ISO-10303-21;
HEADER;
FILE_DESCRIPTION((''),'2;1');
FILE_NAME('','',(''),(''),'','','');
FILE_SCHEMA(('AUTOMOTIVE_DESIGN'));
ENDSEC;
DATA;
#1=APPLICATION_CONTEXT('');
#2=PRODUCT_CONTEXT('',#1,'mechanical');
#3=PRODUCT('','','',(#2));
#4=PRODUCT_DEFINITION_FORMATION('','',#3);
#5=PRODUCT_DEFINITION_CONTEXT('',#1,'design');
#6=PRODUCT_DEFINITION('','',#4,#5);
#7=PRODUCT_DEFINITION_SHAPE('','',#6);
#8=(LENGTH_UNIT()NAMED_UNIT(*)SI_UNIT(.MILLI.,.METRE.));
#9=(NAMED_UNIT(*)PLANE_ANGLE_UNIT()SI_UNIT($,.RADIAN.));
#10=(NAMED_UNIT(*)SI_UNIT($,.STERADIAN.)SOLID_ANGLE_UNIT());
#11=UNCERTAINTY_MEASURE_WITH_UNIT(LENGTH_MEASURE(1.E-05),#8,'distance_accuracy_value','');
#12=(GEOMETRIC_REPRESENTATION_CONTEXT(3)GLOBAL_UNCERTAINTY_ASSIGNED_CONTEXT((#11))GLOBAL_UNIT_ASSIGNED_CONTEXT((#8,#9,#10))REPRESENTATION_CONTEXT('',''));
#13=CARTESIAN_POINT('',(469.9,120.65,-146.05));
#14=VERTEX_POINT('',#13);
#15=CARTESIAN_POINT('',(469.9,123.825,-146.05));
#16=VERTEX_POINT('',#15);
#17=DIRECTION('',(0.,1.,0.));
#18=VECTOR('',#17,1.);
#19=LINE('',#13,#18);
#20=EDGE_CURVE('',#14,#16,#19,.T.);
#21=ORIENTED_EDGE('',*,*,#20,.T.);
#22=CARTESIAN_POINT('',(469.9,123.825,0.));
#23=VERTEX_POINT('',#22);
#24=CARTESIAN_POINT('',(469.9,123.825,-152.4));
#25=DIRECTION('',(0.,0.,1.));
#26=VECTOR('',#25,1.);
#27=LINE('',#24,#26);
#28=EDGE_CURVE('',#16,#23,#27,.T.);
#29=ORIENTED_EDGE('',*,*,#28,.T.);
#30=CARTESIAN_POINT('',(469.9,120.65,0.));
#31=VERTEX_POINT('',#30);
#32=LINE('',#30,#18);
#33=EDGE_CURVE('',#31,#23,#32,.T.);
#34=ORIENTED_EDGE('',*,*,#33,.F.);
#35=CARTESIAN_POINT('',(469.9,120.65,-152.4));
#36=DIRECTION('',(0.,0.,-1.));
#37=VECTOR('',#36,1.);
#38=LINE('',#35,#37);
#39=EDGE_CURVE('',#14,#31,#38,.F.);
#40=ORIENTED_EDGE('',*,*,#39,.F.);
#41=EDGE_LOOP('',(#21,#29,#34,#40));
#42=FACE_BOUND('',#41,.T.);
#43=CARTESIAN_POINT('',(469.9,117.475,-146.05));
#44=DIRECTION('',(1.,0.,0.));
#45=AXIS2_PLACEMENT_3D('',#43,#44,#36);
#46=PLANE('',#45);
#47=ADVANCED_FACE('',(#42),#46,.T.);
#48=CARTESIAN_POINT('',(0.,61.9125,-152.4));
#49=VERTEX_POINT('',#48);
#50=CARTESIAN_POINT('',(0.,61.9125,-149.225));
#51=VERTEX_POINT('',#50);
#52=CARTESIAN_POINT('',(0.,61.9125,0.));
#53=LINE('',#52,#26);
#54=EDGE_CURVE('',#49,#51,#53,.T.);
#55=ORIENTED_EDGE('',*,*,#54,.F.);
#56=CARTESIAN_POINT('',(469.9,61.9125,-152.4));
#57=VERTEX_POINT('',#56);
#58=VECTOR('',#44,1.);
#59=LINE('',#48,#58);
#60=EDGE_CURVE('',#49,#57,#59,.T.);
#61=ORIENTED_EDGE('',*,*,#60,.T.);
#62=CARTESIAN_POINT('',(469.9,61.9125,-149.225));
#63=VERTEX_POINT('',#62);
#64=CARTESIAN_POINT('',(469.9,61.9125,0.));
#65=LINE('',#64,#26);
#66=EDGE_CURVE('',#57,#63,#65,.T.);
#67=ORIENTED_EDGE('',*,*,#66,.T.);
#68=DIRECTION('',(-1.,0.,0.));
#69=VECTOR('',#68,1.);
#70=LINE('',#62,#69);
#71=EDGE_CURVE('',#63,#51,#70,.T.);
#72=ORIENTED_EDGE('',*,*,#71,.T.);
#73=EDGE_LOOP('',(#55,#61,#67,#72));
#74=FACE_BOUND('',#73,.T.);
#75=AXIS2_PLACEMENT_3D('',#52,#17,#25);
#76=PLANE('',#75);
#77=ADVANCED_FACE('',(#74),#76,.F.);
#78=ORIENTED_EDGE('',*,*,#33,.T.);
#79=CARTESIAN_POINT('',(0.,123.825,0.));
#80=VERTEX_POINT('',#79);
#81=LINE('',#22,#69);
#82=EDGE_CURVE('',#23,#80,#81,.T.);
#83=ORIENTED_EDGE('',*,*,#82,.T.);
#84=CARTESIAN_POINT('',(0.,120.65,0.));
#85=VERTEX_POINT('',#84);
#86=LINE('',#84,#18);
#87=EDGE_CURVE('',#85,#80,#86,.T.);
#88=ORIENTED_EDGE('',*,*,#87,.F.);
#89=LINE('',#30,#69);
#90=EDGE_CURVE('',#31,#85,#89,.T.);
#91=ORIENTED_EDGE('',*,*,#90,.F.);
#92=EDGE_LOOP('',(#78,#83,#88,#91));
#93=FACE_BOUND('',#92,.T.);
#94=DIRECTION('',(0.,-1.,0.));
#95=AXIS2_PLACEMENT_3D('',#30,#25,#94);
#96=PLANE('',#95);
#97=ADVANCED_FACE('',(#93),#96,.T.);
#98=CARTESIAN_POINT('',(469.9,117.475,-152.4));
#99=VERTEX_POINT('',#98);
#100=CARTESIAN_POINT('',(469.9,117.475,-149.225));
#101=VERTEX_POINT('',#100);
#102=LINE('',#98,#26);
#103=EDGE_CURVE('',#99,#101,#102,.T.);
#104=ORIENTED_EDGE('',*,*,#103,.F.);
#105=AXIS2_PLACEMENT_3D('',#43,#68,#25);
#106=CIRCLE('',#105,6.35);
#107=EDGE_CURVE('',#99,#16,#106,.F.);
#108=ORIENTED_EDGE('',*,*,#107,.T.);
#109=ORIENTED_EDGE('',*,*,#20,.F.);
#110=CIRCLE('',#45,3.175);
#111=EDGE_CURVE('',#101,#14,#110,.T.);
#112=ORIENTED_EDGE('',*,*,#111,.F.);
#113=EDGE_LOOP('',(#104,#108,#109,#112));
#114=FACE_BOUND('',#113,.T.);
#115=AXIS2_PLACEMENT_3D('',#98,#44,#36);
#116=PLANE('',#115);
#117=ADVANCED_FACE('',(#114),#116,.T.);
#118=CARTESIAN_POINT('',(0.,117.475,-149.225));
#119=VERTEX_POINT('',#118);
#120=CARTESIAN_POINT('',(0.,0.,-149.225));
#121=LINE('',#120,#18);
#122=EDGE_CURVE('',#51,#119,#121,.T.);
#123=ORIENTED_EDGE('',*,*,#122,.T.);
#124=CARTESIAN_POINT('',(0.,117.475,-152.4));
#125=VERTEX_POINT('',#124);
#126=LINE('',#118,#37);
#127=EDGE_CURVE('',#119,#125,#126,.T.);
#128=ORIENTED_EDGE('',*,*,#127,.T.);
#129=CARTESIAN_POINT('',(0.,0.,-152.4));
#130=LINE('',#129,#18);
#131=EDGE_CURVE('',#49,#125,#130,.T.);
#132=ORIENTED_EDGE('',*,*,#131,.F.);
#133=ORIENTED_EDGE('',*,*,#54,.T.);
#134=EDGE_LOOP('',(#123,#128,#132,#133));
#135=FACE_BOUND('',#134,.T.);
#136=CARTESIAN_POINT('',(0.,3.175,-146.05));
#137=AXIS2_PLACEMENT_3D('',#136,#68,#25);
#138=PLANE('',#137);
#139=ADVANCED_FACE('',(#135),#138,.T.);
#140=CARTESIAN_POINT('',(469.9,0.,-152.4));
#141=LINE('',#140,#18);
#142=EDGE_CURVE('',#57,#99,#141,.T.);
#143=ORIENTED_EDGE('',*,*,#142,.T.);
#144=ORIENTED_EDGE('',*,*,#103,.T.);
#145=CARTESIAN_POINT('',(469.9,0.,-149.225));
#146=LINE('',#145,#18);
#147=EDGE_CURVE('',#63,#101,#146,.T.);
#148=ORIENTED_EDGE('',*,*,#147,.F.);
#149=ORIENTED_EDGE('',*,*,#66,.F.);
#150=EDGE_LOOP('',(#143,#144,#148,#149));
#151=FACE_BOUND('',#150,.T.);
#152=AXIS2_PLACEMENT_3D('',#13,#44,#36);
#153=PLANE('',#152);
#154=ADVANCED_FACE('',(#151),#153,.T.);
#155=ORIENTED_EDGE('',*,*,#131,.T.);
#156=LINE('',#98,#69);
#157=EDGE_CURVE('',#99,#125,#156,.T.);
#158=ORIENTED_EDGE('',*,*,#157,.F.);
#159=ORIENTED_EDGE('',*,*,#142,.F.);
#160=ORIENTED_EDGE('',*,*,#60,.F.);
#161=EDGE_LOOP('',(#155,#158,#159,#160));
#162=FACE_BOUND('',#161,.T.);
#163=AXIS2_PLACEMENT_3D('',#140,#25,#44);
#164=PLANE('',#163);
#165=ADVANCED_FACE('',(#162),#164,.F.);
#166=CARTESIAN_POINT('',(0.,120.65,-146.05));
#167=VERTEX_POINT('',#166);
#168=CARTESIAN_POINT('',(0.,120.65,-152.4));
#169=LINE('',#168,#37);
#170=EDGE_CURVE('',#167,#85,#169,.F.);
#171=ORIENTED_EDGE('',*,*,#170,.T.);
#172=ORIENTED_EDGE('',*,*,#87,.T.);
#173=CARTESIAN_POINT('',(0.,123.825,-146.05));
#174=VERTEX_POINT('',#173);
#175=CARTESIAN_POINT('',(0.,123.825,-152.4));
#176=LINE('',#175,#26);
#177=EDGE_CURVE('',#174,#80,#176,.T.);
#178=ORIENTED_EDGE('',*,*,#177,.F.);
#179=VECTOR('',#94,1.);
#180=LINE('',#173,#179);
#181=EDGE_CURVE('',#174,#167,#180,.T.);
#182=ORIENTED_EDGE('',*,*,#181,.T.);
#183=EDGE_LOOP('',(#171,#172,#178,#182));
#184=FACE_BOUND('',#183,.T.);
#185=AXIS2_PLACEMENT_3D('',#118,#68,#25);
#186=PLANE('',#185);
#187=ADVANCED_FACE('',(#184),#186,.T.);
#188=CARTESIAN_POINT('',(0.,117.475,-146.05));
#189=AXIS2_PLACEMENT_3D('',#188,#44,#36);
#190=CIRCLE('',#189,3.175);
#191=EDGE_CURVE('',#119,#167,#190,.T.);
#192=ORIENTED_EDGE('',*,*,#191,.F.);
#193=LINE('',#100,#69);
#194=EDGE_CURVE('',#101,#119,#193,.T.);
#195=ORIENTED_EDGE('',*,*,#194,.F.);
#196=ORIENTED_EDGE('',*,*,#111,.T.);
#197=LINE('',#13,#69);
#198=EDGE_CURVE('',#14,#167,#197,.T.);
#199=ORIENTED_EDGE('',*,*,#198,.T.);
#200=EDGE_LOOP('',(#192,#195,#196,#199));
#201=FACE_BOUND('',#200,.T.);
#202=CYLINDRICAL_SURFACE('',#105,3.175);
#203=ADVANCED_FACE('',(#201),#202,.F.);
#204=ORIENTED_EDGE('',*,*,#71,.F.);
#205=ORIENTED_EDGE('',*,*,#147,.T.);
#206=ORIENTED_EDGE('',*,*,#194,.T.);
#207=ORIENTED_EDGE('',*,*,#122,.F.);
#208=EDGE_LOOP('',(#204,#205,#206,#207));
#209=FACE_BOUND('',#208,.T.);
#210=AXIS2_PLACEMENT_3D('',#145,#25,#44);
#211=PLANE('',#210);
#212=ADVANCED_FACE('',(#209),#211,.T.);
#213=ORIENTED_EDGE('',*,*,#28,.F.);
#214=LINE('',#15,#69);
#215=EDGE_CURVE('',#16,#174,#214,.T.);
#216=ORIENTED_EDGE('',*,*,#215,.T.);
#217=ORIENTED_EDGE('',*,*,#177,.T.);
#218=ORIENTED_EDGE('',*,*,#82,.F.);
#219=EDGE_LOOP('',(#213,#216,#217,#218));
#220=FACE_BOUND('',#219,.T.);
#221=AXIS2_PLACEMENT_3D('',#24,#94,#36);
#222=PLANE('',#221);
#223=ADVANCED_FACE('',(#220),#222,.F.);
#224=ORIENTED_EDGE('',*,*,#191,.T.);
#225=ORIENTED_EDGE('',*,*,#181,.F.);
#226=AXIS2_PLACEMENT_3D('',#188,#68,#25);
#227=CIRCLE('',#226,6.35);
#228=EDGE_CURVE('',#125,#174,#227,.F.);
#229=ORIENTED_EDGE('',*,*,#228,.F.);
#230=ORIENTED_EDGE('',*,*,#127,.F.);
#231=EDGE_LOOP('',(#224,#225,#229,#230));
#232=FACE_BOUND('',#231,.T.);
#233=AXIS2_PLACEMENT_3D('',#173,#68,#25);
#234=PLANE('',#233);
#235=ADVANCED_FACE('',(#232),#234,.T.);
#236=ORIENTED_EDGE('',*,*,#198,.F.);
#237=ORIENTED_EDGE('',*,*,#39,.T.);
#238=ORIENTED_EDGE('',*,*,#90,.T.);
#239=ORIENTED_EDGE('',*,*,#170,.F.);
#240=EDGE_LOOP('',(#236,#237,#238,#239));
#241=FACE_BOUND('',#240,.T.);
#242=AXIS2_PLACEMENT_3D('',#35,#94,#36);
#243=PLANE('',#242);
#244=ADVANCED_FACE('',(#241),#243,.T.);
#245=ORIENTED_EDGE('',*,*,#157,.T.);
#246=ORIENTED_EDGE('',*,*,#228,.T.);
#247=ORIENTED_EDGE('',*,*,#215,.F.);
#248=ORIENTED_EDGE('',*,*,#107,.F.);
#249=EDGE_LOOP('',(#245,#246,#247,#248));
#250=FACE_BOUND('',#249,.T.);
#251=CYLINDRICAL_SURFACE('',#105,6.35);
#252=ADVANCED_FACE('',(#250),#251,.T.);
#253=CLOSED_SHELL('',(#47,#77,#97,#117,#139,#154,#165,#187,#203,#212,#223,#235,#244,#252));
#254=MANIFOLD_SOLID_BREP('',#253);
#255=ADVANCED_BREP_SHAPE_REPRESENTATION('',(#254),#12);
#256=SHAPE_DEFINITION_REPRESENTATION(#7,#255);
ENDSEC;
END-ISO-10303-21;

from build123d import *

# Parameters (mm, degrees)
BASE_FLANGE1_DEPTH = 469.9
SKETCH10_W         = 152.4
SKETCH10_H         = 61.9125
CUT_EXTRUDE5_DEPTH = 510.278313523


# Sheet-metal steps are written as plain solids
with BuildPart() as part:
    # Sketch1 → Base-Flange1 (new body)
    with BuildSketch(Plane(origin=(0, 0, 0), x_dir=(0, 0, -1), z_dir=(1, 0, 0))):
        with BuildLine():
            Line((0, 0), (146.05, 0))
            ThreePointArc((146.05, 0), (150.540128061, 1.859871939), (152.4, 6.35))
            Line((152.4, 6.35), (152.4, 117.475))
            ThreePointArc((152.4, 117.475), (150.540128061, 121.965128061), (146.05, 123.825))
            Line((146.05, 123.825), (0, 123.825))
            Line((0, 123.825), (0, 120.65))
            Line((0, 120.65), (146.05, 120.65))
            ThreePointArc((146.05, 120.65), (148.29506403, 119.72006403), (149.225, 117.475))
            Line((149.225, 117.475), (149.225, 6.35))
            ThreePointArc((149.225, 6.35), (148.29506403, 4.10493597), (146.05, 3.175))
            Line((146.05, 3.175), (0, 3.175))
            Line((0, 3.175), (0, 0))
        make_face()
    extrude(amount=BASE_FLANGE1_DEPTH)

    # Sketch10 → Cut-Extrude5 (cut, through all)
    with BuildSketch(Plane(origin=(469.9, 0, 0), x_dir=(0, 0, -1), z_dir=(1, 0, 0))):
        with Locations((76.2, 30.95625)):
            Rectangle(SKETCH10_W, SKETCH10_H)
    extrude(amount=-CUT_EXTRUDE5_DEPTH, mode=Mode.SUBTRACT)


solid = part.part
